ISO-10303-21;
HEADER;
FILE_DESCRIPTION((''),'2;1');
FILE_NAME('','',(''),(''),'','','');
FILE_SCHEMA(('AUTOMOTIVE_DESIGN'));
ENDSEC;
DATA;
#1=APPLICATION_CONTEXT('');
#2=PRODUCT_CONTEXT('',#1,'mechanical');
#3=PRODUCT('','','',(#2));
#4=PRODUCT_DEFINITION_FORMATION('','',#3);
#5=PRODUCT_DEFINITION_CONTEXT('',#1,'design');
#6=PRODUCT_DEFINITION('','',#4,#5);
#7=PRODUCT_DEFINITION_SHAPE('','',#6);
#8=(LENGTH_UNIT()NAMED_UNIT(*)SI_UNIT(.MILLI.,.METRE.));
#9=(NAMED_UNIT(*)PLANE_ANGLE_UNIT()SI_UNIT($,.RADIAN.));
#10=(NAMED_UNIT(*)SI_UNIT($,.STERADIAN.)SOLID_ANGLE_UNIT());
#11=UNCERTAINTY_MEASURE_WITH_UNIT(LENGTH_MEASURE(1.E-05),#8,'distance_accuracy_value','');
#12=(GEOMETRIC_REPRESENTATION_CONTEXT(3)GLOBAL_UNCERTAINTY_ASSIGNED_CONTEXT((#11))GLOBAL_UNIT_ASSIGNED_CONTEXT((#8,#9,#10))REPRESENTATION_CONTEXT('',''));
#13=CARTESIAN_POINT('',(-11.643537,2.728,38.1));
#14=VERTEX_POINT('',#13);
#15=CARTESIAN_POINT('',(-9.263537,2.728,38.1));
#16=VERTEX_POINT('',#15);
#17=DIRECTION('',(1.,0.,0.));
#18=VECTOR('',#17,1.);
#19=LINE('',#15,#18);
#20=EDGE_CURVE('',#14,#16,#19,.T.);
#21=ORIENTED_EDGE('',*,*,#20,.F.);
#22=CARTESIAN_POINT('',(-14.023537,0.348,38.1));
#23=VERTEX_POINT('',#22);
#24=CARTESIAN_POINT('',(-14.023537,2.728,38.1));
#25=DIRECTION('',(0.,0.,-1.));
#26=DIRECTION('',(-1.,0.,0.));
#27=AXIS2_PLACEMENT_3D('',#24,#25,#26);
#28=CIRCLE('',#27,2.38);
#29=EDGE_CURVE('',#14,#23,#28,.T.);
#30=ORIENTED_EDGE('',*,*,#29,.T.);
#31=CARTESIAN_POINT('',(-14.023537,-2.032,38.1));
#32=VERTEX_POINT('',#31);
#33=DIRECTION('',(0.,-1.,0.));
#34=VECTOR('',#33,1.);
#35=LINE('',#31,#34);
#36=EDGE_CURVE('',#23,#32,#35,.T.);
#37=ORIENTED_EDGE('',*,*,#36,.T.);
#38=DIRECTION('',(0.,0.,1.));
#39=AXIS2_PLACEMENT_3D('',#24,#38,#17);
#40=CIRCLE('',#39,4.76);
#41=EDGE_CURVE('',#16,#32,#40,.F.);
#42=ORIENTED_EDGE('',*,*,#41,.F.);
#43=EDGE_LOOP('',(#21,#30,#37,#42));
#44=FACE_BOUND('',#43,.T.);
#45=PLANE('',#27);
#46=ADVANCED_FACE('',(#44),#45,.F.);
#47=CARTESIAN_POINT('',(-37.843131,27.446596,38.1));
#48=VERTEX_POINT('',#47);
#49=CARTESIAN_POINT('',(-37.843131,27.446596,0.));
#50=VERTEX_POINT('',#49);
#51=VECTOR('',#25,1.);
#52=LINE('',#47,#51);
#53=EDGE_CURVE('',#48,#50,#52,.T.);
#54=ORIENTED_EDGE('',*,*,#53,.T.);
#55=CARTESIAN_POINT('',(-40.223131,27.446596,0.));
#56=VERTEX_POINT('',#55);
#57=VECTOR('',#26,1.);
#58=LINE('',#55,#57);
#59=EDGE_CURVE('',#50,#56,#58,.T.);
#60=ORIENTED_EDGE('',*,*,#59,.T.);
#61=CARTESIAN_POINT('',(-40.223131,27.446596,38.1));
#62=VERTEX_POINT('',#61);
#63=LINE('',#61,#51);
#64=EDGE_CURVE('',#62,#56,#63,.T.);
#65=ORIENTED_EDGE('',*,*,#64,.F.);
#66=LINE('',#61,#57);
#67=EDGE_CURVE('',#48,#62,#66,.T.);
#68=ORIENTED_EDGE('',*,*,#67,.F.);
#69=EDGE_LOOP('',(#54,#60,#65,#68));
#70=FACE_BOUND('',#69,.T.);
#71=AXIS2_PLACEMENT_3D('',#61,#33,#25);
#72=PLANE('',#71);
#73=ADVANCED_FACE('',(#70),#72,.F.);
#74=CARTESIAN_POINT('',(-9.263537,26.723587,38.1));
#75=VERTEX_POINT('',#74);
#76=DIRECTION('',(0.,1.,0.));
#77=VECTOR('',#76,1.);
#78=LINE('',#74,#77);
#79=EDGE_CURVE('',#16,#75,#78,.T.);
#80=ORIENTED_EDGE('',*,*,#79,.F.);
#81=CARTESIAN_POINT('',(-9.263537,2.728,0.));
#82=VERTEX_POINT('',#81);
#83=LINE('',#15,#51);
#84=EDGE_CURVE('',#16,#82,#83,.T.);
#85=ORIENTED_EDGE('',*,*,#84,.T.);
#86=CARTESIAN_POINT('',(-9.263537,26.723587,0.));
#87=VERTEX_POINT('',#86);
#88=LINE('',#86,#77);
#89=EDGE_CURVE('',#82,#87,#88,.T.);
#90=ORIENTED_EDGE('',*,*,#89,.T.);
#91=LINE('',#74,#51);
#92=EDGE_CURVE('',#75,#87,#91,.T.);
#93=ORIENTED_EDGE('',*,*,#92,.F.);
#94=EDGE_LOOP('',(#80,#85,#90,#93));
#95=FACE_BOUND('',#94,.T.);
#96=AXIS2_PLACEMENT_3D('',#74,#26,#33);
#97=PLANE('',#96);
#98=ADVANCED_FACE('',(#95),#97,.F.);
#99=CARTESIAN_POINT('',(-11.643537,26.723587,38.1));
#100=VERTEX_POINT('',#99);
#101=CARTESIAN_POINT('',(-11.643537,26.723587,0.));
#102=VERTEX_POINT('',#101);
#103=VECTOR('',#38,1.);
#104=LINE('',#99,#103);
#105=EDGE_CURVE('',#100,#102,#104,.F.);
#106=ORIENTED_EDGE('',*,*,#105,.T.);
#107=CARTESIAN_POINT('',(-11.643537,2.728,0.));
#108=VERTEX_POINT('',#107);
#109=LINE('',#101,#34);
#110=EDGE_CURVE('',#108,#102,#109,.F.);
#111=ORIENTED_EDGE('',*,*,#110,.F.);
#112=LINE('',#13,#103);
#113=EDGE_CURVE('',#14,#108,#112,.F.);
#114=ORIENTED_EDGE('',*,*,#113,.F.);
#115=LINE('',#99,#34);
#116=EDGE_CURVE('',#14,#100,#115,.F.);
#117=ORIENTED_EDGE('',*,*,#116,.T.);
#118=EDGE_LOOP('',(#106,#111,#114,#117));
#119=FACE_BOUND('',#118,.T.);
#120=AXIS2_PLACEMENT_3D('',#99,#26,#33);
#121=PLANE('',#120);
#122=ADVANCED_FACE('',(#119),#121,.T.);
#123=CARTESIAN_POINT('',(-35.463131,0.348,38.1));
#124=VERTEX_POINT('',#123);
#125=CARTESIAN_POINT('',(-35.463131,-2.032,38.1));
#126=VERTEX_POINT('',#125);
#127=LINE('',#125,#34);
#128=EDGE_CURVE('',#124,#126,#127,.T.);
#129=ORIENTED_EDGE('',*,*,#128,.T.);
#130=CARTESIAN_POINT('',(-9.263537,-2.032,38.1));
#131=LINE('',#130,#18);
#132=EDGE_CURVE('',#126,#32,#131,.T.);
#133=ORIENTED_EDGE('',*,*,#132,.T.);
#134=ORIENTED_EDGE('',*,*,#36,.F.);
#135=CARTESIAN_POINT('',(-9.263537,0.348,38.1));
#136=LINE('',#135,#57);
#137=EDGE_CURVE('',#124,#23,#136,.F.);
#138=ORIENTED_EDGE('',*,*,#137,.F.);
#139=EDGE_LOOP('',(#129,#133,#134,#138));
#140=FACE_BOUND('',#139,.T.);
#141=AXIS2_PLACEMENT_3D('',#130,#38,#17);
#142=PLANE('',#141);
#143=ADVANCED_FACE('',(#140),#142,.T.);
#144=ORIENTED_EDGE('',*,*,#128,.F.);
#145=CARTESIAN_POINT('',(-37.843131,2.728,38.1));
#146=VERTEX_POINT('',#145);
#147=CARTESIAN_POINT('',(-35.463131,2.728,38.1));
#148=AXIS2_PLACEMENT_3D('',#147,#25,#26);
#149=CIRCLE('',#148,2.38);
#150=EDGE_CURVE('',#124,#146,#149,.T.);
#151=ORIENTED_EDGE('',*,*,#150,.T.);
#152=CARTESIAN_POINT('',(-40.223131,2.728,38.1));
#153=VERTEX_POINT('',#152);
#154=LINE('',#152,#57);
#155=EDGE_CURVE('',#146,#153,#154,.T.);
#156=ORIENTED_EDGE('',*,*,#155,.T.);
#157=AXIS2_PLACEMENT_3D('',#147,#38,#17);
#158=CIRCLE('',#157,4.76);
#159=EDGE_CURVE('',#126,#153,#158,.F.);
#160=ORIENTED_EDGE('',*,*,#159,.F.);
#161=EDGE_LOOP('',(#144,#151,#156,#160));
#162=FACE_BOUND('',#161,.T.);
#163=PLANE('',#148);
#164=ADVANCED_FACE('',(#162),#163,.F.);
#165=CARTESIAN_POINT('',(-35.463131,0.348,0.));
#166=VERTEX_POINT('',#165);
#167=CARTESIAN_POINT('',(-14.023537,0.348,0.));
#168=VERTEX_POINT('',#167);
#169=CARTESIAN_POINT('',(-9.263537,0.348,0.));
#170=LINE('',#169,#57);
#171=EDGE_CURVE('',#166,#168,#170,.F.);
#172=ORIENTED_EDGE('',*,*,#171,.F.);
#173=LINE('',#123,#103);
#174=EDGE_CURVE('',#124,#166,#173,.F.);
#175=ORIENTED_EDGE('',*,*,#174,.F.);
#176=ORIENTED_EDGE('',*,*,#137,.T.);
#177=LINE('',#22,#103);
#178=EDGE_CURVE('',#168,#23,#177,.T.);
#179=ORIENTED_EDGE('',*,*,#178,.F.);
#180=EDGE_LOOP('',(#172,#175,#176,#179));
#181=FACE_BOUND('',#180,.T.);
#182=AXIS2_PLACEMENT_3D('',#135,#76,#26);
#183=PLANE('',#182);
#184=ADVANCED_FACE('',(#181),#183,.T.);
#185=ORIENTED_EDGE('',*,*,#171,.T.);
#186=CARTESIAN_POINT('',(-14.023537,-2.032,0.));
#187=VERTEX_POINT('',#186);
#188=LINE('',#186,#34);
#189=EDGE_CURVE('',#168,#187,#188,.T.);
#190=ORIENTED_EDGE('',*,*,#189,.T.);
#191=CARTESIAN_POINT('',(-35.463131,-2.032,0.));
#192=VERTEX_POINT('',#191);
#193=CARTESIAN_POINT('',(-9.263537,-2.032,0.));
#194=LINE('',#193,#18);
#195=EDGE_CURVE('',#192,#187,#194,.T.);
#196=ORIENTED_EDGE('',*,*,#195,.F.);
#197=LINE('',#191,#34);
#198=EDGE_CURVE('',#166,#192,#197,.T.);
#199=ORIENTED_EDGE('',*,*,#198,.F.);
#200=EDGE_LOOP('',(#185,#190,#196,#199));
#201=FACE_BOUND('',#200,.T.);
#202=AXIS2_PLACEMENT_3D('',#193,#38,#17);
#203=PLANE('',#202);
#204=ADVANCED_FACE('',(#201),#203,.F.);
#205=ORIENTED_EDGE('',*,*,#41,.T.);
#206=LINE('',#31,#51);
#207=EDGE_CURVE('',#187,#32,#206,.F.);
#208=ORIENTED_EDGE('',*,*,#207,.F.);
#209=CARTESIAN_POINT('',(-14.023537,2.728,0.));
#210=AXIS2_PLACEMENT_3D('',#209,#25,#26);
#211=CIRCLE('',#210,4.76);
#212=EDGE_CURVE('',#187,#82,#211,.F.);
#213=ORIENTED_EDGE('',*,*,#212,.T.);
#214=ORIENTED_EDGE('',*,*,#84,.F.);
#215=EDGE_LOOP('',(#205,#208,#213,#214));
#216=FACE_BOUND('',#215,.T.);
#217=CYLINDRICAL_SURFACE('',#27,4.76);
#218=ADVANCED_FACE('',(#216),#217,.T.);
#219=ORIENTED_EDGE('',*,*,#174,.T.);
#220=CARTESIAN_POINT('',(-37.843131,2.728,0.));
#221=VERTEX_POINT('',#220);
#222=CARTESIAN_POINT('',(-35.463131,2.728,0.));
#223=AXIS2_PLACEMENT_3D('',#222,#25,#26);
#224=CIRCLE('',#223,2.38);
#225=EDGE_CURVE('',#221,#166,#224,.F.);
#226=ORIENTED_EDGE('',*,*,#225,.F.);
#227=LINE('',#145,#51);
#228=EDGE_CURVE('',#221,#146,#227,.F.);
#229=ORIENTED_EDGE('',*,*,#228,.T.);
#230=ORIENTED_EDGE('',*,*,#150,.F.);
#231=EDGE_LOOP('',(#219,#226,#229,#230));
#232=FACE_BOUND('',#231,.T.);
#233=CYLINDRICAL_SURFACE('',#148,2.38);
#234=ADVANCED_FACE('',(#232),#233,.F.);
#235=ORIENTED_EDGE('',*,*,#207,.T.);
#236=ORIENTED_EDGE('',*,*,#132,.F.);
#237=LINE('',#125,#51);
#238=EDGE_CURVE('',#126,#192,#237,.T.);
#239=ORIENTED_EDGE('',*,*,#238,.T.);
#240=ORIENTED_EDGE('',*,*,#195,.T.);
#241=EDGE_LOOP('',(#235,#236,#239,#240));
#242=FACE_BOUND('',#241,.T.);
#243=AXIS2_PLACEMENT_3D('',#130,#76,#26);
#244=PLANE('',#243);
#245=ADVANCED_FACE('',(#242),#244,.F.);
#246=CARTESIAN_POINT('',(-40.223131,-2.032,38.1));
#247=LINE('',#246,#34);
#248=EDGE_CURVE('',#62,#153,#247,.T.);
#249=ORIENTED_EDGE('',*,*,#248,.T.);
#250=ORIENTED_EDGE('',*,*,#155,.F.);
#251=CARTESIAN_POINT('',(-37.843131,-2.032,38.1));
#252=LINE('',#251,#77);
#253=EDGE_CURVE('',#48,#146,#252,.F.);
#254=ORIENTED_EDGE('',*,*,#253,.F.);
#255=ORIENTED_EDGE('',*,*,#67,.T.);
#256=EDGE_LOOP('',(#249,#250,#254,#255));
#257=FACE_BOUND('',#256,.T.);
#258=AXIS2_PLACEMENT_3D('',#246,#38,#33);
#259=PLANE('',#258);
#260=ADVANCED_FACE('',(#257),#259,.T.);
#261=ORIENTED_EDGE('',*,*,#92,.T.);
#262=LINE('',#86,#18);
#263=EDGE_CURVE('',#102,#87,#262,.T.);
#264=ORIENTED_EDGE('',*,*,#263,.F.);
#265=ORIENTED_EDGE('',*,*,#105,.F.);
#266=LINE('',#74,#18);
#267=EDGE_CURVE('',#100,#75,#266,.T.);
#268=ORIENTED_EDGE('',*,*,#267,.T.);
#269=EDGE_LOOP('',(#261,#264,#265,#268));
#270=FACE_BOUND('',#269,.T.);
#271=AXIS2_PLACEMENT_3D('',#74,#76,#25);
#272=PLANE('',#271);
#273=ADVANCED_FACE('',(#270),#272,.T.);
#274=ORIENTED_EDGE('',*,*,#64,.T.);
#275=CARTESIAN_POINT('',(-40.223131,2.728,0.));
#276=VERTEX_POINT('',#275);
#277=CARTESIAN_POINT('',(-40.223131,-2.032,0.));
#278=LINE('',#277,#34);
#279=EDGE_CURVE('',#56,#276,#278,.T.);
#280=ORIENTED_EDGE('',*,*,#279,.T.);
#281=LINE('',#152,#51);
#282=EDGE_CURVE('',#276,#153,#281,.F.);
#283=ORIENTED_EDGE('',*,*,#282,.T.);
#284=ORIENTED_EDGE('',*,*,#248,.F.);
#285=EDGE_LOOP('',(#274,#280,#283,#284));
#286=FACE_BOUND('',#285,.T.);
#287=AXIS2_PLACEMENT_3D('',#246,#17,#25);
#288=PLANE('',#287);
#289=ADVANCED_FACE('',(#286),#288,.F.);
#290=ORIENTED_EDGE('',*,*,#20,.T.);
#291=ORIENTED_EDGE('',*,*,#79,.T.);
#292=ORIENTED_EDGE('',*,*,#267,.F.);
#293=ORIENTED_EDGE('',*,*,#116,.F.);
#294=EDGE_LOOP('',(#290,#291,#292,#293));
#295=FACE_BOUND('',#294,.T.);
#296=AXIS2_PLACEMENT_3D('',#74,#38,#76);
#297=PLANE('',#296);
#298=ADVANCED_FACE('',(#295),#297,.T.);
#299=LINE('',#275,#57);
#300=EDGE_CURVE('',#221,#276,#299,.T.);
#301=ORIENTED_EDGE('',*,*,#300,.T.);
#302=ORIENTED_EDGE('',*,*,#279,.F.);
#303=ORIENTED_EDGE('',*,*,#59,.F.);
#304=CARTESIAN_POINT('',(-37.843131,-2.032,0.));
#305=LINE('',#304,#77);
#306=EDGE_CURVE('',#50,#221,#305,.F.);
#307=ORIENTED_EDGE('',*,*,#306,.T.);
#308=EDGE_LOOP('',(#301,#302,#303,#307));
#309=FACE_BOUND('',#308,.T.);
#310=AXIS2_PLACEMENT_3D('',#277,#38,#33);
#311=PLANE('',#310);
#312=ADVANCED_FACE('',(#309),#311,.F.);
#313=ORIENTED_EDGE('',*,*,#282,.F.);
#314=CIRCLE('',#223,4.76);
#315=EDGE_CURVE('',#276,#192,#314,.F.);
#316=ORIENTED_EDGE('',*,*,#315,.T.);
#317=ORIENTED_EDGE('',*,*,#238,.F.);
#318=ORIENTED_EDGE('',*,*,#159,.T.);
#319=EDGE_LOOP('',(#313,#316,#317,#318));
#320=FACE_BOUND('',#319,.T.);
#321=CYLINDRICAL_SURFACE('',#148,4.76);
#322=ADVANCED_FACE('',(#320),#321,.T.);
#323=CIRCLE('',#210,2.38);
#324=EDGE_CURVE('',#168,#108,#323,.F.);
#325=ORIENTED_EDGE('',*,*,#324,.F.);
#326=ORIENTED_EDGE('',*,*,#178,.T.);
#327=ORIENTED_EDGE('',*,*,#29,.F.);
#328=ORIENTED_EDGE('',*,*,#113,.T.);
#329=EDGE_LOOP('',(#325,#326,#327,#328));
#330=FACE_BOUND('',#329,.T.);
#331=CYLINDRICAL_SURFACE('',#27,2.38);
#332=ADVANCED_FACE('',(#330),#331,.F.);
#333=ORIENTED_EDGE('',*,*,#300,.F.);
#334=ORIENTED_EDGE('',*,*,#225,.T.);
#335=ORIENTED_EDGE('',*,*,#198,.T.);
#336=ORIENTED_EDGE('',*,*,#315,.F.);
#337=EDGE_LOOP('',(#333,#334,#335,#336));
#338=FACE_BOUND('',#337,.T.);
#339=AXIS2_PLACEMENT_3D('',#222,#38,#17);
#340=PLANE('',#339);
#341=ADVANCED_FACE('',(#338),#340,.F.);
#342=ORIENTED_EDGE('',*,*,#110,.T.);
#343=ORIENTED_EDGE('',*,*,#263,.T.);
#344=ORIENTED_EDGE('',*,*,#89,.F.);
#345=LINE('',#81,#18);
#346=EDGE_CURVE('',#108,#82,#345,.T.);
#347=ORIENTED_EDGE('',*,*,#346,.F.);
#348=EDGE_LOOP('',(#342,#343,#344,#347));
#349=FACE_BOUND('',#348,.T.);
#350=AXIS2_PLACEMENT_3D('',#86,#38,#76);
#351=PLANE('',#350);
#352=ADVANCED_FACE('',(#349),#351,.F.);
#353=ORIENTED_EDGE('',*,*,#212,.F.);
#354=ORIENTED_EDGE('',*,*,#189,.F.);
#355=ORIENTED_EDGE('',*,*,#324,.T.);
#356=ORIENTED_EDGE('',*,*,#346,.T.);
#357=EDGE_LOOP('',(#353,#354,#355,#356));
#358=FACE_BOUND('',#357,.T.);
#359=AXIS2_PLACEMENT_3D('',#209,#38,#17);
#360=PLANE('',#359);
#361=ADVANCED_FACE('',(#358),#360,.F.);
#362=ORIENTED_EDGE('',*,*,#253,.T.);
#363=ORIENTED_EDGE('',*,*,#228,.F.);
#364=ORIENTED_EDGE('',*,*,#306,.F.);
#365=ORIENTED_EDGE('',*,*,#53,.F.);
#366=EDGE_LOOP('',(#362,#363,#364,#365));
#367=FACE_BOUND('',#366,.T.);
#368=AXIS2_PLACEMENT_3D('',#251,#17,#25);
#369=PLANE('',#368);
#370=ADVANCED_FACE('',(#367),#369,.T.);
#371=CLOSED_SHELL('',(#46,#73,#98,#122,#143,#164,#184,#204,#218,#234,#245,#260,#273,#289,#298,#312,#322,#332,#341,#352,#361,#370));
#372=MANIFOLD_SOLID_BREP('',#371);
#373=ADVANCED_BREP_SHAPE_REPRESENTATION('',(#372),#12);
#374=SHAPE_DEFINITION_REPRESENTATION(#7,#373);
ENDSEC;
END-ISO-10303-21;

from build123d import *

# Parameters (mm, degrees)
BOSS_EXTRUDE1_DEPTH    = 38.1
CONVERT_SOLID1_DEPTH   = 38.1
CONVERT_SOLID1_2_DEPTH = 38.1


# Read off the part's stored shape, not the designer's step: Convert-Solid1
with BuildPart() as part:
    # Sketch1 → Boss-Extrude1 (new body)
    with BuildSketch(Plane.XY):
        Polygon((-38.191130673, 27.446595767), (-38.191130673, 0), (-11.295536696, 0), (-11.295536696, 26.723586817), (-9.263536696, 26.723586817), (-9.263536696, -2.032), (-40.223130673, -2.032), (-40.223130673, 27.446595767), align=None)
    extrude(amount=BOSS_EXTRUDE1_DEPTH)

    # Convert-Solid1 outline → Convert-Solid1 (cut)
    with BuildSketch(Plane.XY):
        with BuildLine():
            Line((-9.263536696, -2.032), (-9.263536696, 2.728000132))
            ThreePointArc((-9.263536696, 2.728000132), (-10.657708456, -0.63782824), (-14.023536828, -2.032))
            Line((-14.023536828, -2.032), (-9.263536696, -2.032))
        make_face()
        with BuildLine():
            Line((-40.223130673, -2.032), (-35.463130541, -2.032))
            ThreePointArc((-35.463130541, -2.032), (-38.828958913, -0.63782824), (-40.223130673, 2.728000132))
            Line((-40.223130673, 2.728000132), (-40.223130673, -2.032))
        make_face()
    extrude(amount=CONVERT_SOLID1_DEPTH, mode=Mode.SUBTRACT)

    # Convert-Solid1 2 outline → Convert-Solid1 2 (add)
    with BuildSketch(Plane.XY):
        with BuildLine():
            Line((-11.295536696, 0), (-11.295536696, 26.723586817))
            Line((-11.295536696, 26.723586817), (-11.643536762, 26.723586817))
            Line((-11.643536762, 26.723586817), (-11.643536762, 2.728000132))
            ThreePointArc((-11.643536762, 2.728000132), (-12.340622642, 1.045085946), (-14.023536828, 0.348000066))
            Line((-14.023536828, 0.348000066), (-35.463130541, 0.348000066))
            ThreePointArc((-35.463130541, 0.348000066), (-37.146044727, 1.045085946), (-37.843130607, 2.728000132))
            Line((-37.843130607, 2.728000132), (-37.843130607, 27.446595767))
            Line((-37.843130607, 27.446595767), (-38.191130673, 27.446595767))
            Line((-38.191130673, 27.446595767), (-38.191130673, 0))
            Line((-38.191130673, 0), (-11.295536696, 0))
        make_face()
    extrude(amount=CONVERT_SOLID1_2_DEPTH)


solid = part.part
